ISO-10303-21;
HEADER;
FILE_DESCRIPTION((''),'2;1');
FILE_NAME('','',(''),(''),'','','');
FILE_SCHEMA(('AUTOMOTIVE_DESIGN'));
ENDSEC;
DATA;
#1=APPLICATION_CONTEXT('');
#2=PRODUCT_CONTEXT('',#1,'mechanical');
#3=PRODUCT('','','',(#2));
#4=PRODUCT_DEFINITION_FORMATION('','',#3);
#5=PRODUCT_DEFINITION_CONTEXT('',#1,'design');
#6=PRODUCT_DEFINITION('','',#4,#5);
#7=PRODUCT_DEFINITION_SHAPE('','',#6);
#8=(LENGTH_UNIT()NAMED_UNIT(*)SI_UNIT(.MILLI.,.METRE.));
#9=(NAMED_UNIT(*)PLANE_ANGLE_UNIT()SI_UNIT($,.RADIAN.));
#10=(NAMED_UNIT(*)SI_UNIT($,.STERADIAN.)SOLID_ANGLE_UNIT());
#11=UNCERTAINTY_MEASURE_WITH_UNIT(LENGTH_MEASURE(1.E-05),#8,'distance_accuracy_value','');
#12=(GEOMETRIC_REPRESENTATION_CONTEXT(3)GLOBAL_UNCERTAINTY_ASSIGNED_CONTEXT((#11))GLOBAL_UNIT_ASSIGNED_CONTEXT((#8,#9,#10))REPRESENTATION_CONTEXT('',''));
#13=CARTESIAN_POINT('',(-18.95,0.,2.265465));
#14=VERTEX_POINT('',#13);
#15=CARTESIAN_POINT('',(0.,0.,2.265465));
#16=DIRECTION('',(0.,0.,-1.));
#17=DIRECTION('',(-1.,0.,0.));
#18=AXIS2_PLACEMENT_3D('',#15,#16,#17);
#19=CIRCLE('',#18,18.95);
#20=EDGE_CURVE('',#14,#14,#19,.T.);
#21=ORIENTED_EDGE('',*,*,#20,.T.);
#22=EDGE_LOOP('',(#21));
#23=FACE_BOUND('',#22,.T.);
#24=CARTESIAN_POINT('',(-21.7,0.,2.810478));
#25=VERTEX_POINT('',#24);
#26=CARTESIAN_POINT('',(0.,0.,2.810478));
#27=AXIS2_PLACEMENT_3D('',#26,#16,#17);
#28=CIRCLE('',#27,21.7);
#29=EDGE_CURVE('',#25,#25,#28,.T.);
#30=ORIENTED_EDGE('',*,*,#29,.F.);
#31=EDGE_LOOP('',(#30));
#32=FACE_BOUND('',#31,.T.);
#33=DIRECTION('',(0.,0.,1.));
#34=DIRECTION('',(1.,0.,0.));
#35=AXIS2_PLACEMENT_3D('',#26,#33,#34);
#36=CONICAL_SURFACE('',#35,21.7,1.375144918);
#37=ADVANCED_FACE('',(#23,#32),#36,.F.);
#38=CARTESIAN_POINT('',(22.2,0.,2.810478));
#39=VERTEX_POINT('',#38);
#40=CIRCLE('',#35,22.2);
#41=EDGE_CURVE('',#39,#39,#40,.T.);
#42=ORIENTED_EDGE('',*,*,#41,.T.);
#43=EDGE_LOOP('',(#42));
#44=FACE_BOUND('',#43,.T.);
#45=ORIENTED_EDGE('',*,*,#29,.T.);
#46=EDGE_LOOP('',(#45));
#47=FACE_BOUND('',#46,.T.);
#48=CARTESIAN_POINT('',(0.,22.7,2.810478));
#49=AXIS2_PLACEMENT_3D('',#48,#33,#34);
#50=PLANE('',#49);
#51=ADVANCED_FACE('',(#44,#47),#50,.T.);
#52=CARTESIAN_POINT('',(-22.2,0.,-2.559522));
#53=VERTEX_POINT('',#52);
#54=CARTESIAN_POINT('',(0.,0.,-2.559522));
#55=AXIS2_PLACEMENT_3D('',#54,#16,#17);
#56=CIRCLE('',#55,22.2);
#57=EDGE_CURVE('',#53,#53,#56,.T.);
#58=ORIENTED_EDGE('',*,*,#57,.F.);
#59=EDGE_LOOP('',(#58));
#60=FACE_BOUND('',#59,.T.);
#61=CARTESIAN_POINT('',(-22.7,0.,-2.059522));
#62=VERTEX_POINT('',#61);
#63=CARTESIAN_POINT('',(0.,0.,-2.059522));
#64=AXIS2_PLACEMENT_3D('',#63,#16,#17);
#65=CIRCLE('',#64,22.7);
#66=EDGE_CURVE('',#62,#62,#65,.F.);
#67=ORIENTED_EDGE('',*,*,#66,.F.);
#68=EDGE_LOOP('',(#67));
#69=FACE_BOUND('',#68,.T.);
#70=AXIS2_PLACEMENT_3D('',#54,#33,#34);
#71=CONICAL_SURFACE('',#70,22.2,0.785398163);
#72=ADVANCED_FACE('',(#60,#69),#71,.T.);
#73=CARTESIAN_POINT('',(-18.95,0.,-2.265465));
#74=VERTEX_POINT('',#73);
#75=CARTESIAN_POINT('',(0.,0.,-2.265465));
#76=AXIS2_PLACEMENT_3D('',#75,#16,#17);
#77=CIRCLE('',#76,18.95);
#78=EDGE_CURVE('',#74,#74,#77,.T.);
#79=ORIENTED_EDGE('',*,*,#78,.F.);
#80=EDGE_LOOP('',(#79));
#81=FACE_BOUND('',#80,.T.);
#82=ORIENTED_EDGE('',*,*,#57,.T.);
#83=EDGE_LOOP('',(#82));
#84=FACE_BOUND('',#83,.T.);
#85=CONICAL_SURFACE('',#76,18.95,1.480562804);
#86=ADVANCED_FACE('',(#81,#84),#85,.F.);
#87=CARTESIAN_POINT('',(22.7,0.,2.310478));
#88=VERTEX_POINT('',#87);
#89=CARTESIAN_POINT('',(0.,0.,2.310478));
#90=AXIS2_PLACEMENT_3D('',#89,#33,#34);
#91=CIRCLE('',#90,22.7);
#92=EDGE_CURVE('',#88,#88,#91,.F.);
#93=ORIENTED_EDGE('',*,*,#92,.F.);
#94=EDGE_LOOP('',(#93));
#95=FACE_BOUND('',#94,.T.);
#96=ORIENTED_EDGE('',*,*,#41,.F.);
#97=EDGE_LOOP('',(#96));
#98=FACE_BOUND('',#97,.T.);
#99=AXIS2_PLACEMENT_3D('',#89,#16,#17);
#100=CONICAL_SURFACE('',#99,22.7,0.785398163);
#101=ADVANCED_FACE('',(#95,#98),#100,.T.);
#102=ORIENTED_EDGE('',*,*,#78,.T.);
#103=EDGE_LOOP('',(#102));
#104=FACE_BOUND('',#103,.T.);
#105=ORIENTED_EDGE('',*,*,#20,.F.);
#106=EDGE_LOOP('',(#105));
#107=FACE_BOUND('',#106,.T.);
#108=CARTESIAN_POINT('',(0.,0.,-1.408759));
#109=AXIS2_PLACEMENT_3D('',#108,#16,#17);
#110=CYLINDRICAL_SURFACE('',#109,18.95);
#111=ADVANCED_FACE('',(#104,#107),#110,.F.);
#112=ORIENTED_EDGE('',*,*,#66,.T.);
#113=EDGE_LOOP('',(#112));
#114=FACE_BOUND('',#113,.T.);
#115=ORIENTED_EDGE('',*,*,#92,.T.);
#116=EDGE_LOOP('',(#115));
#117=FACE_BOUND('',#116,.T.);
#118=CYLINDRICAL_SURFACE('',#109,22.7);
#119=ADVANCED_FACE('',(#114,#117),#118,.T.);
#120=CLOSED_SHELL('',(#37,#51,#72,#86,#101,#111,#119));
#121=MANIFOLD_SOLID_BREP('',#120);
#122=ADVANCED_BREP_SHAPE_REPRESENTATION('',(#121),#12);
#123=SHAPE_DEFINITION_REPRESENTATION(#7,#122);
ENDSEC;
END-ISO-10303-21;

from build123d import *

# Parameters (mm, degrees)
CHAMFER1_SIZE = 0.5


with BuildPart() as part:
    # Sketch2 → Revolve1 (revolve)
    with BuildSketch(Plane(origin=(0, 0, 0), x_dir=(0, 0, -1), z_dir=(1, 0, 0)), mode=Mode.PRIVATE) as revolve1_sk:
        Polygon((-2.810478001, 22.7), (2.559521999, 22.7), (2.559521999, 22.2), (2.265464537, 18.95), (-2.265464537, 18.95), (-2.810478001, 21.7), align=None)
    revolve(revolve1_sk.sketch.rotate(Axis((0, 0, -1.408758661), (0, 0, 1)), 90), axis=Axis((0, 0, -1.408758661), (0, 0, 1)))

    # Chamfer1
    chamfer1_edges = [part.edges().sort_by_distance(p)[0] for p in [
        (22.7, 0, 2.810478001),
        (22.7, 0, -2.559521999),
    ]]
    chamfer(chamfer1_edges, length=CHAMFER1_SIZE - 0.0001)  # a hair under: the kernel refuses the full size


solid = part.part
